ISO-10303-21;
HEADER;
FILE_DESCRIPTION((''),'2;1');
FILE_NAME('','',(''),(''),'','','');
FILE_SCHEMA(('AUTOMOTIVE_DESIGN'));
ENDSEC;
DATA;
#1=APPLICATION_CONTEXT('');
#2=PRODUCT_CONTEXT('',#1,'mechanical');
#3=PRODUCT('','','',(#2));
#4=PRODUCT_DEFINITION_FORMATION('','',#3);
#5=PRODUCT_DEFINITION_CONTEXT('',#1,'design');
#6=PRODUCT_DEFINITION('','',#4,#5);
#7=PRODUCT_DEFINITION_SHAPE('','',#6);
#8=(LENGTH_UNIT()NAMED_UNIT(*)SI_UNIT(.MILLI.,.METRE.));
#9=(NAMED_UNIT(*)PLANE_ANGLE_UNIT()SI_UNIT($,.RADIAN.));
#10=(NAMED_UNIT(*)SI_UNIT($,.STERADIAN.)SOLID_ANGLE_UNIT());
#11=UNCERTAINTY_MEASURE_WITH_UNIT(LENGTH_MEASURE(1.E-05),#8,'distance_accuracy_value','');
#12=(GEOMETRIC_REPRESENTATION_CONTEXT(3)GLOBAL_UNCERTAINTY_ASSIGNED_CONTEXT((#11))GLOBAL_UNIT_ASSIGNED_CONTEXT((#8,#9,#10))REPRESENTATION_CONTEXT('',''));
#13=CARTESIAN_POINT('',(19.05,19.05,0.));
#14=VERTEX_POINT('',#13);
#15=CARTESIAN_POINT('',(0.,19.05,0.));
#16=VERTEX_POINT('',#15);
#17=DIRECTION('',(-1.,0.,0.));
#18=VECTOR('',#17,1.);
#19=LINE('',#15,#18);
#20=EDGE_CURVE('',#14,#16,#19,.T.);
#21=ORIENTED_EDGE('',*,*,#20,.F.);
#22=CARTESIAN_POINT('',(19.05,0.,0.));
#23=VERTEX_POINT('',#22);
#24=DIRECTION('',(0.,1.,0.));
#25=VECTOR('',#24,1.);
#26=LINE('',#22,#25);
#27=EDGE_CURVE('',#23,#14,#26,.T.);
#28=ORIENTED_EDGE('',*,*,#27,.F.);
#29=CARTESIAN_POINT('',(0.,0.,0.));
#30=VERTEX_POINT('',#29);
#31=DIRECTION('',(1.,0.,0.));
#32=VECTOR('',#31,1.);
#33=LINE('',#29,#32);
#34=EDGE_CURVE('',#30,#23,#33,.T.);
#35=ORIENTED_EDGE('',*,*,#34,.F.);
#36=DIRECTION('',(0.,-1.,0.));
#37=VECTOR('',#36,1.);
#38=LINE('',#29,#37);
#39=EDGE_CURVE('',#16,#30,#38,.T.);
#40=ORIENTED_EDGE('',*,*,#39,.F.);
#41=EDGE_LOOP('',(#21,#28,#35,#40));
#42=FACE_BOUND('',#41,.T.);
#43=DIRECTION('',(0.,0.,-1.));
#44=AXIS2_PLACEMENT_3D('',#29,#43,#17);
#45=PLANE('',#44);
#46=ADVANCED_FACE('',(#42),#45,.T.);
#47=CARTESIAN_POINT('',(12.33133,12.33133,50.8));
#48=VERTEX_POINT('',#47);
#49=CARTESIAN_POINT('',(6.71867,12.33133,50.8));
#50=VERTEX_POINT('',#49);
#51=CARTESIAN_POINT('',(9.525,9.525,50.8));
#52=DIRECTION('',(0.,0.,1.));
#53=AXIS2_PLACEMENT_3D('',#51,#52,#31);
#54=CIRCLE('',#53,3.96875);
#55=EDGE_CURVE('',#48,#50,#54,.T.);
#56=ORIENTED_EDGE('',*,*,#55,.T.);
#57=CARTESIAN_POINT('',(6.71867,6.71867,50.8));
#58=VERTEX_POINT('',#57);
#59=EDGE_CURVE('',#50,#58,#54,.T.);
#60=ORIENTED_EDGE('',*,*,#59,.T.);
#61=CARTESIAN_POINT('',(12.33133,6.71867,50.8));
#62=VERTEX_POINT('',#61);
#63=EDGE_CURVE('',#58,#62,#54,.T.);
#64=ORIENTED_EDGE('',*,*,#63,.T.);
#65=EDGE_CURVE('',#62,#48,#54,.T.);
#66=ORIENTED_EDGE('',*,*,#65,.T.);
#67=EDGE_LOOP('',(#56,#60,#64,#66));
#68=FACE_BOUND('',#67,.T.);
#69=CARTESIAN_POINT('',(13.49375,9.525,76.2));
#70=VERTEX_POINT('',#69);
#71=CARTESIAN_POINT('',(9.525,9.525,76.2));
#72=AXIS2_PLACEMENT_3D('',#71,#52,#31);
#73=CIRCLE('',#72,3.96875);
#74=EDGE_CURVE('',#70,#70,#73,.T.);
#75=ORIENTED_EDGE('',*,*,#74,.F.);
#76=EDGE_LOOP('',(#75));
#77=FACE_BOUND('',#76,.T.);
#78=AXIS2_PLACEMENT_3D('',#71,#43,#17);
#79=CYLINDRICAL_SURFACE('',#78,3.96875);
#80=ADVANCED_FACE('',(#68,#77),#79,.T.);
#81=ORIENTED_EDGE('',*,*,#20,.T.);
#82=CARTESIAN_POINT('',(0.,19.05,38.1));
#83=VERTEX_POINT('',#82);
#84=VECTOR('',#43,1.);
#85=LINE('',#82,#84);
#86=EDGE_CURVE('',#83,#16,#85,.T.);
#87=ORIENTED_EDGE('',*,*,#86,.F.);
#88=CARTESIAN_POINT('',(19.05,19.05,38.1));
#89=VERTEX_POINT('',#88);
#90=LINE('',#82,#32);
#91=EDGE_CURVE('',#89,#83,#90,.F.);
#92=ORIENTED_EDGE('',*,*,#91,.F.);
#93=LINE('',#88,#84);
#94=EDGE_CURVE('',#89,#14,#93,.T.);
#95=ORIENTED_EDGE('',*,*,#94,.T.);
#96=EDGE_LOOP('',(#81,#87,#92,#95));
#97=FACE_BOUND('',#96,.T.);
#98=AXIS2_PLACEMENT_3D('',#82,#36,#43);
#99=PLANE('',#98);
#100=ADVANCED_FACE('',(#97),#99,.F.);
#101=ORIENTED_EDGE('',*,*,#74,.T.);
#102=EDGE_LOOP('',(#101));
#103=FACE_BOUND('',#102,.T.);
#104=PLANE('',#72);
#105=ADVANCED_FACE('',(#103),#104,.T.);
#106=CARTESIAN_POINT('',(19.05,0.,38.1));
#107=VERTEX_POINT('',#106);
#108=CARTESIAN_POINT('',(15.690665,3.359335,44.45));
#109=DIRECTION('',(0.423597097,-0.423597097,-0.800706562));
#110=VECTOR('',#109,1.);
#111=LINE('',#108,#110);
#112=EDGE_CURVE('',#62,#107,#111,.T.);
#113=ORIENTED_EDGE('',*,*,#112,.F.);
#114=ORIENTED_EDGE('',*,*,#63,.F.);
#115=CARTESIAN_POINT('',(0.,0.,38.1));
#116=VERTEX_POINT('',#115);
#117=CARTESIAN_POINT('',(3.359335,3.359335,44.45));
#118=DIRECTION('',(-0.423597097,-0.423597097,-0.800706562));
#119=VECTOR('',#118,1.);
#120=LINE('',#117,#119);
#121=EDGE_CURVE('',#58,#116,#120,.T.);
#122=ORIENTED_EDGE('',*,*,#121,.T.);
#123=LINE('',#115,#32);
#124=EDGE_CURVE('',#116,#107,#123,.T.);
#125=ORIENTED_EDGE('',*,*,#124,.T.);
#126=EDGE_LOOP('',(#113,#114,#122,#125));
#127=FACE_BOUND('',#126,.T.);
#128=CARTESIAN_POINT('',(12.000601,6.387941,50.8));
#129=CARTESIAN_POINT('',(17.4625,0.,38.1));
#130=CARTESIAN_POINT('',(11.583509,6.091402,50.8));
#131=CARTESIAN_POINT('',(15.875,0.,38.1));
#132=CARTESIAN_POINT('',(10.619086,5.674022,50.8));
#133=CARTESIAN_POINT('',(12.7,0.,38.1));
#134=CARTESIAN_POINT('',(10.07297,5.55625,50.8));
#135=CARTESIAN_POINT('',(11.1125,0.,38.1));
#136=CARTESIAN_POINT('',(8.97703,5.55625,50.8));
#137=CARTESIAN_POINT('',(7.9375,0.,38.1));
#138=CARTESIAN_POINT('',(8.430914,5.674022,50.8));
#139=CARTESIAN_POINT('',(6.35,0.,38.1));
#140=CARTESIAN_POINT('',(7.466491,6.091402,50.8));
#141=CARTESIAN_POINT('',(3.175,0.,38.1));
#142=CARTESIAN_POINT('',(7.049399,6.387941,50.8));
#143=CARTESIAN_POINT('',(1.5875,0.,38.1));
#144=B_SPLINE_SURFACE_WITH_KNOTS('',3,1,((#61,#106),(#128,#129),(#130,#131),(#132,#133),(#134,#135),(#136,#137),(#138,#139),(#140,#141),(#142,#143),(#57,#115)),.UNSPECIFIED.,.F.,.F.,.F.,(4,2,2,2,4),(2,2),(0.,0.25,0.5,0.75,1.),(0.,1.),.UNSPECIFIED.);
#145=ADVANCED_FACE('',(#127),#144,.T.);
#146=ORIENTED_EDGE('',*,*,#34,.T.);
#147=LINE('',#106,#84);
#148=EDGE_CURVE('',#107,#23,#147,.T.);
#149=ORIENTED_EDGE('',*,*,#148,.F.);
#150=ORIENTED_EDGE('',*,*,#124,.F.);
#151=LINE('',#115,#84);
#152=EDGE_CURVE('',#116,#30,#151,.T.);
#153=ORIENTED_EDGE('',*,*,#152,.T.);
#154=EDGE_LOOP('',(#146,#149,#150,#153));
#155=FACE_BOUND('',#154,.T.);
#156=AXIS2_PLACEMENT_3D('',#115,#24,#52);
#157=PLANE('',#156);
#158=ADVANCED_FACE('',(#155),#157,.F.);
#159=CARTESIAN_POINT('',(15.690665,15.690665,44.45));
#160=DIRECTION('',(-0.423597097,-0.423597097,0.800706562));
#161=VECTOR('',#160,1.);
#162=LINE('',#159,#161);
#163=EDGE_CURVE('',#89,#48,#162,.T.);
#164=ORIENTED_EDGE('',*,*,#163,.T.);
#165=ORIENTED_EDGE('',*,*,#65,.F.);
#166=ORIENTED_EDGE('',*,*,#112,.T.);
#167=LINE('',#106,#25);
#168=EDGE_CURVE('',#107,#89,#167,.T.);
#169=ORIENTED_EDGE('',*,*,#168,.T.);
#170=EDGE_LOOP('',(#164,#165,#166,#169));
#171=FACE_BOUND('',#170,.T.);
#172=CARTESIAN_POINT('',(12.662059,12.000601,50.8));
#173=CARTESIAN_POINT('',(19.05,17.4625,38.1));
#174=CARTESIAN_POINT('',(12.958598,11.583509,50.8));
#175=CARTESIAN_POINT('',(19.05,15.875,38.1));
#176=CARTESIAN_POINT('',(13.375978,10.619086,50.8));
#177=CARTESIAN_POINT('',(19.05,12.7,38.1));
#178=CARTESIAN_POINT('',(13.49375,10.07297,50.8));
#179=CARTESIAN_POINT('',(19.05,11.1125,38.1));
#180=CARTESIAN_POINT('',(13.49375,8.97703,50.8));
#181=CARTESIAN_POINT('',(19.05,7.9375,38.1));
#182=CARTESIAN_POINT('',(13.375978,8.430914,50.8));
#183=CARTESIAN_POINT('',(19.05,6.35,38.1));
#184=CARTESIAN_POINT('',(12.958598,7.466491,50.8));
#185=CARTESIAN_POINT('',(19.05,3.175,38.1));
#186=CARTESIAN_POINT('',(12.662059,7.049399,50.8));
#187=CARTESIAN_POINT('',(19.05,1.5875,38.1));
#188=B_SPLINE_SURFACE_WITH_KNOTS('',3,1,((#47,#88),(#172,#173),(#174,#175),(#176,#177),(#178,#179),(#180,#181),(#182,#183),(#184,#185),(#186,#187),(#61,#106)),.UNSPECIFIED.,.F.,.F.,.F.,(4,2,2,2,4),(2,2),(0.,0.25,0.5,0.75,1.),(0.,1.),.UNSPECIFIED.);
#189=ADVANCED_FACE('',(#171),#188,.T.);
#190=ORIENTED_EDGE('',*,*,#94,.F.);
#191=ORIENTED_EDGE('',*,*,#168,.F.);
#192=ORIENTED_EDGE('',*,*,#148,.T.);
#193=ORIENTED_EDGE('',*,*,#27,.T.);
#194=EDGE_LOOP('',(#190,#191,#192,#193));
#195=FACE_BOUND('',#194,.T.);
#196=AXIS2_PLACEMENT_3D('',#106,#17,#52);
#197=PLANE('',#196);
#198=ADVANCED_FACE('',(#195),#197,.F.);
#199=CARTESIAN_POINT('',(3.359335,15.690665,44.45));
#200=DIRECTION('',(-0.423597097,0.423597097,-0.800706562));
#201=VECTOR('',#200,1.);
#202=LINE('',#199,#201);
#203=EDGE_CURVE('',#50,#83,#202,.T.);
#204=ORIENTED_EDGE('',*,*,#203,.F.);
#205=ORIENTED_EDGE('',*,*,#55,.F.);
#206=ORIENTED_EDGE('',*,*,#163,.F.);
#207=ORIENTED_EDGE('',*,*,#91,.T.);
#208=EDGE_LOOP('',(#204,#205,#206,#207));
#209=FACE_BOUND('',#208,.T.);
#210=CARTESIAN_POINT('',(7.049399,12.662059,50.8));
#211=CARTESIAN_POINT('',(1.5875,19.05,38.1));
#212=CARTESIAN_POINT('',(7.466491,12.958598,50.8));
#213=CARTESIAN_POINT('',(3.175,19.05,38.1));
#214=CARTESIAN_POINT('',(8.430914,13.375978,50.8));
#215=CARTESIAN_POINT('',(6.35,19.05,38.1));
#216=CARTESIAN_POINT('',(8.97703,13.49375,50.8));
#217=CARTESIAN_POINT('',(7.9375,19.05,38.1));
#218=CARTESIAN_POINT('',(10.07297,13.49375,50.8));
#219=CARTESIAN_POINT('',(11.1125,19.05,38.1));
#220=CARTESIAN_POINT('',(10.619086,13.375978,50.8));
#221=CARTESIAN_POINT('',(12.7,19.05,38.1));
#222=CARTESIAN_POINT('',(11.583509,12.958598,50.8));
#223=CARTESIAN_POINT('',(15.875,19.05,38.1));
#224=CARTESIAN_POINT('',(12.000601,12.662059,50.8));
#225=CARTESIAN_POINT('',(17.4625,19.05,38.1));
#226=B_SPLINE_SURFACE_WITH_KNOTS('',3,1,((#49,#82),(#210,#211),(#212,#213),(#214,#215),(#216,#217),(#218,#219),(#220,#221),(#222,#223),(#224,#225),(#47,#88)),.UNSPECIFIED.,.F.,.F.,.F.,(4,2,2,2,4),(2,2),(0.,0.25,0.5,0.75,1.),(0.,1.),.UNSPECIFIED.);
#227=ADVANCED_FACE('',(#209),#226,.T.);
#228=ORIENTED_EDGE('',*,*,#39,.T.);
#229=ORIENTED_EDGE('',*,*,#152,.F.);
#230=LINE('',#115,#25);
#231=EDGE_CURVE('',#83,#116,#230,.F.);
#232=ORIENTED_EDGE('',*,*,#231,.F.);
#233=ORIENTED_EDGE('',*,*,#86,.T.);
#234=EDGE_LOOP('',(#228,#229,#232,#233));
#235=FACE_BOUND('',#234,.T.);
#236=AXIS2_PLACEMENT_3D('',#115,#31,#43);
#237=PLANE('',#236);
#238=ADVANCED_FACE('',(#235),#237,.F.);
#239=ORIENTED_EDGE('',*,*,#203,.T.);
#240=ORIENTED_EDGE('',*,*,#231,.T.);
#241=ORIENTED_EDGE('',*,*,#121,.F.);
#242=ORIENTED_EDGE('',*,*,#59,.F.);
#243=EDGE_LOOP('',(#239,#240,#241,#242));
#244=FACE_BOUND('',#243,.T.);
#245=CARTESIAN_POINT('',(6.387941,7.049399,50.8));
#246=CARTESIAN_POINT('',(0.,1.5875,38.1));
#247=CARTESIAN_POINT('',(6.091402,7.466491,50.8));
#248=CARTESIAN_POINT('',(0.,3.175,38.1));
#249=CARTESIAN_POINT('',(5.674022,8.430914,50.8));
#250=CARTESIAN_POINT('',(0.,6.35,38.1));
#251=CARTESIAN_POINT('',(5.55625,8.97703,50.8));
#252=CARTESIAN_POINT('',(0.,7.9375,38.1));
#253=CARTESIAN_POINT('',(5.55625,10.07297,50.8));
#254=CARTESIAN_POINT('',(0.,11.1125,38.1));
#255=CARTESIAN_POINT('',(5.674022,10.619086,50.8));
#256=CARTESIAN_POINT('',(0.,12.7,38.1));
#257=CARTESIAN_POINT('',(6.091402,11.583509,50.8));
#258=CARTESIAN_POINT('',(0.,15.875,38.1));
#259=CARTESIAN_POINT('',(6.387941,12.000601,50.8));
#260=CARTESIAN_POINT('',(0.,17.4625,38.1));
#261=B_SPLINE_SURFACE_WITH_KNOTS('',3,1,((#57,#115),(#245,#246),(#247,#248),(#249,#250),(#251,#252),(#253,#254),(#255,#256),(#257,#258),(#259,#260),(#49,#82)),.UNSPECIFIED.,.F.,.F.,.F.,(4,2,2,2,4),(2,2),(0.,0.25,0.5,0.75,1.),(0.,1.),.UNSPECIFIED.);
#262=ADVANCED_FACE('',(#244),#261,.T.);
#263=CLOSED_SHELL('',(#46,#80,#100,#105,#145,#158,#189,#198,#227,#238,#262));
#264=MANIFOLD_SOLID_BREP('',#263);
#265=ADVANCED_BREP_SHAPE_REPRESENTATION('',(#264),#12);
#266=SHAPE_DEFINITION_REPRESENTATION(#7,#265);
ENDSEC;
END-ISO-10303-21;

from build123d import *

# Parameters (mm, degrees)
SKETCH1_W           = 19.05
SKETCH1_H           = 19.05
BOSS_EXTRUDE1_DEPTH = 38.1
SKETCH3_3_R         = 3.96875
BOSS_EXTRUDE3_DEPTH = 25.4


with BuildPart() as part:
    # Sketch1 → Boss-Extrude1 (new body)
    with BuildSketch(Plane.XY):
        with Locations((9.525, 9.525)):
            Rectangle(SKETCH1_W, SKETCH1_H)
    extrude(amount=BOSS_EXTRUDE1_DEPTH)

    # Loft3: read off the stored shape, not the designer's step
    # Loft3: loft between two sections, ruled curve by curve
    loft3_from = [
        Edge.make_bspline([(12.331330038, 12.331330038, 50.8), (12.662059205, 12.000600871, 50.8), (12.958598179, 11.583509037, 50.8), (13.375977978, 10.619086159, 50.8), (13.49375, 10.072970025, 50.8), (13.49375, 8.977029975, 50.8), (13.375977978, 8.430913841, 50.8), (12.958598179, 7.466490963, 50.8), (12.662059205, 7.049399129, 50.8), (12.331330038, 6.718669962, 50.8)], [0, 0, 0, 0, 0.25, 0.25, 0.5, 0.5, 0.75, 0.75, 1, 1, 1, 1], 3),
        Edge.make_bspline([(12.331330038, 6.718669962, 50.8), (12.000600871, 6.387940795, 50.8), (11.583509037, 6.091401821, 50.8), (10.619086159, 5.674022022, 50.8), (10.072970025, 5.55625, 50.8), (8.977029975, 5.55625, 50.8), (8.430913841, 5.674022022, 50.8), (7.466490963, 6.091401821, 50.8), (7.049399129, 6.387940795, 50.8), (6.718669962, 6.718669962, 50.8)], [0, 0, 0, 0, 0.25, 0.25, 0.5, 0.5, 0.75, 0.75, 1, 1, 1, 1], 3),
        Edge.make_bspline([(6.718669962, 12.331330038, 50.8), (7.049399129, 12.662059205, 50.8), (7.466490963, 12.958598179, 50.8), (8.430913841, 13.375977978, 50.8), (8.977029975, 13.49375, 50.8), (10.072970025, 13.49375, 50.8), (10.619086159, 13.375977978, 50.8), (11.583509037, 12.958598179, 50.8), (12.000600871, 12.662059205, 50.8), (12.331330038, 12.331330038, 50.8)], [0, 0, 0, 0, 0.25, 0.25, 0.5, 0.5, 0.75, 0.75, 1, 1, 1, 1], 3),
        Edge.make_bspline([(6.718669962, 6.718669962, 50.8), (6.387940795, 7.049399129, 50.8), (6.091401821, 7.466490963, 50.8), (5.674022022, 8.430913841, 50.8), (5.55625, 8.977029975, 50.8), (5.55625, 10.072970025, 50.8), (5.674022022, 10.619086159, 50.8), (6.091401821, 11.583509037, 50.8), (6.387940795, 12.000600871, 50.8), (6.718669962, 12.331330038, 50.8)], [0, 0, 0, 0, 0.25, 0.25, 0.5, 0.5, 0.75, 0.75, 1, 1, 1, 1], 3),
    ]
    loft3_to = [
        Edge.make_bspline([(19.05, 19.05, 38.1), (19.05, 17.4625, 38.1), (19.05, 15.875, 38.1), (19.05, 12.7, 38.1), (19.05, 11.1125, 38.1), (19.05, 7.9375, 38.1), (19.05, 6.35, 38.1), (19.05, 3.175, 38.1), (19.05, 1.5875, 38.1), (19.05, 0, 38.1)], [0, 0, 0, 0, 0.25, 0.25, 0.5, 0.5, 0.75, 0.75, 1, 1, 1, 1], 3),
        Edge.make_bspline([(19.05, 0, 38.1), (17.4625, 0, 38.1), (15.875, 0, 38.1), (12.7, 0, 38.1), (11.1125, 0, 38.1), (7.9375, 0, 38.1), (6.35, 0, 38.1), (3.175, 0, 38.1), (1.5875, 0, 38.1), (0, 0, 38.1)], [0, 0, 0, 0, 0.25, 0.25, 0.5, 0.5, 0.75, 0.75, 1, 1, 1, 1], 3),
        Edge.make_bspline([(0, 19.05, 38.1), (1.5875, 19.05, 38.1), (3.175, 19.05, 38.1), (6.35, 19.05, 38.1), (7.9375, 19.05, 38.1), (11.1125, 19.05, 38.1), (12.7, 19.05, 38.1), (15.875, 19.05, 38.1), (17.4625, 19.05, 38.1), (19.05, 19.05, 38.1)], [0, 0, 0, 0, 0.25, 0.25, 0.5, 0.5, 0.75, 0.75, 1, 1, 1, 1], 3),
        Edge.make_bspline([(0, 0, 38.1), (0, 1.5875, 38.1), (0, 3.175, 38.1), (0, 6.35, 38.1), (0, 7.9375, 38.1), (0, 11.1125, 38.1), (0, 12.7, 38.1), (0, 15.875, 38.1), (0, 17.4625, 38.1), (0, 19.05, 38.1)], [0, 0, 0, 0, 0.25, 0.25, 0.5, 0.5, 0.75, 0.75, 1, 1, 1, 1], 3),
    ]
    loft3 = Solid(Shell([*[Face.make_surface_from_curves(loft3_from[k], loft3_to[k]) for k in range(4)], Face(Wire(loft3_from)), Face(Wire(loft3_to))]))
    add(loft3)

    # Sketch3<3> → Boss-Extrude3 (add)
    with BuildSketch(Plane.XY.offset(50.8)):
        with Locations(Location((9.525, 9.525, 0), (0, 0, 135))):
            Circle(SKETCH3_3_R)
    extrude(amount=BOSS_EXTRUDE3_DEPTH)


solid = part.part
